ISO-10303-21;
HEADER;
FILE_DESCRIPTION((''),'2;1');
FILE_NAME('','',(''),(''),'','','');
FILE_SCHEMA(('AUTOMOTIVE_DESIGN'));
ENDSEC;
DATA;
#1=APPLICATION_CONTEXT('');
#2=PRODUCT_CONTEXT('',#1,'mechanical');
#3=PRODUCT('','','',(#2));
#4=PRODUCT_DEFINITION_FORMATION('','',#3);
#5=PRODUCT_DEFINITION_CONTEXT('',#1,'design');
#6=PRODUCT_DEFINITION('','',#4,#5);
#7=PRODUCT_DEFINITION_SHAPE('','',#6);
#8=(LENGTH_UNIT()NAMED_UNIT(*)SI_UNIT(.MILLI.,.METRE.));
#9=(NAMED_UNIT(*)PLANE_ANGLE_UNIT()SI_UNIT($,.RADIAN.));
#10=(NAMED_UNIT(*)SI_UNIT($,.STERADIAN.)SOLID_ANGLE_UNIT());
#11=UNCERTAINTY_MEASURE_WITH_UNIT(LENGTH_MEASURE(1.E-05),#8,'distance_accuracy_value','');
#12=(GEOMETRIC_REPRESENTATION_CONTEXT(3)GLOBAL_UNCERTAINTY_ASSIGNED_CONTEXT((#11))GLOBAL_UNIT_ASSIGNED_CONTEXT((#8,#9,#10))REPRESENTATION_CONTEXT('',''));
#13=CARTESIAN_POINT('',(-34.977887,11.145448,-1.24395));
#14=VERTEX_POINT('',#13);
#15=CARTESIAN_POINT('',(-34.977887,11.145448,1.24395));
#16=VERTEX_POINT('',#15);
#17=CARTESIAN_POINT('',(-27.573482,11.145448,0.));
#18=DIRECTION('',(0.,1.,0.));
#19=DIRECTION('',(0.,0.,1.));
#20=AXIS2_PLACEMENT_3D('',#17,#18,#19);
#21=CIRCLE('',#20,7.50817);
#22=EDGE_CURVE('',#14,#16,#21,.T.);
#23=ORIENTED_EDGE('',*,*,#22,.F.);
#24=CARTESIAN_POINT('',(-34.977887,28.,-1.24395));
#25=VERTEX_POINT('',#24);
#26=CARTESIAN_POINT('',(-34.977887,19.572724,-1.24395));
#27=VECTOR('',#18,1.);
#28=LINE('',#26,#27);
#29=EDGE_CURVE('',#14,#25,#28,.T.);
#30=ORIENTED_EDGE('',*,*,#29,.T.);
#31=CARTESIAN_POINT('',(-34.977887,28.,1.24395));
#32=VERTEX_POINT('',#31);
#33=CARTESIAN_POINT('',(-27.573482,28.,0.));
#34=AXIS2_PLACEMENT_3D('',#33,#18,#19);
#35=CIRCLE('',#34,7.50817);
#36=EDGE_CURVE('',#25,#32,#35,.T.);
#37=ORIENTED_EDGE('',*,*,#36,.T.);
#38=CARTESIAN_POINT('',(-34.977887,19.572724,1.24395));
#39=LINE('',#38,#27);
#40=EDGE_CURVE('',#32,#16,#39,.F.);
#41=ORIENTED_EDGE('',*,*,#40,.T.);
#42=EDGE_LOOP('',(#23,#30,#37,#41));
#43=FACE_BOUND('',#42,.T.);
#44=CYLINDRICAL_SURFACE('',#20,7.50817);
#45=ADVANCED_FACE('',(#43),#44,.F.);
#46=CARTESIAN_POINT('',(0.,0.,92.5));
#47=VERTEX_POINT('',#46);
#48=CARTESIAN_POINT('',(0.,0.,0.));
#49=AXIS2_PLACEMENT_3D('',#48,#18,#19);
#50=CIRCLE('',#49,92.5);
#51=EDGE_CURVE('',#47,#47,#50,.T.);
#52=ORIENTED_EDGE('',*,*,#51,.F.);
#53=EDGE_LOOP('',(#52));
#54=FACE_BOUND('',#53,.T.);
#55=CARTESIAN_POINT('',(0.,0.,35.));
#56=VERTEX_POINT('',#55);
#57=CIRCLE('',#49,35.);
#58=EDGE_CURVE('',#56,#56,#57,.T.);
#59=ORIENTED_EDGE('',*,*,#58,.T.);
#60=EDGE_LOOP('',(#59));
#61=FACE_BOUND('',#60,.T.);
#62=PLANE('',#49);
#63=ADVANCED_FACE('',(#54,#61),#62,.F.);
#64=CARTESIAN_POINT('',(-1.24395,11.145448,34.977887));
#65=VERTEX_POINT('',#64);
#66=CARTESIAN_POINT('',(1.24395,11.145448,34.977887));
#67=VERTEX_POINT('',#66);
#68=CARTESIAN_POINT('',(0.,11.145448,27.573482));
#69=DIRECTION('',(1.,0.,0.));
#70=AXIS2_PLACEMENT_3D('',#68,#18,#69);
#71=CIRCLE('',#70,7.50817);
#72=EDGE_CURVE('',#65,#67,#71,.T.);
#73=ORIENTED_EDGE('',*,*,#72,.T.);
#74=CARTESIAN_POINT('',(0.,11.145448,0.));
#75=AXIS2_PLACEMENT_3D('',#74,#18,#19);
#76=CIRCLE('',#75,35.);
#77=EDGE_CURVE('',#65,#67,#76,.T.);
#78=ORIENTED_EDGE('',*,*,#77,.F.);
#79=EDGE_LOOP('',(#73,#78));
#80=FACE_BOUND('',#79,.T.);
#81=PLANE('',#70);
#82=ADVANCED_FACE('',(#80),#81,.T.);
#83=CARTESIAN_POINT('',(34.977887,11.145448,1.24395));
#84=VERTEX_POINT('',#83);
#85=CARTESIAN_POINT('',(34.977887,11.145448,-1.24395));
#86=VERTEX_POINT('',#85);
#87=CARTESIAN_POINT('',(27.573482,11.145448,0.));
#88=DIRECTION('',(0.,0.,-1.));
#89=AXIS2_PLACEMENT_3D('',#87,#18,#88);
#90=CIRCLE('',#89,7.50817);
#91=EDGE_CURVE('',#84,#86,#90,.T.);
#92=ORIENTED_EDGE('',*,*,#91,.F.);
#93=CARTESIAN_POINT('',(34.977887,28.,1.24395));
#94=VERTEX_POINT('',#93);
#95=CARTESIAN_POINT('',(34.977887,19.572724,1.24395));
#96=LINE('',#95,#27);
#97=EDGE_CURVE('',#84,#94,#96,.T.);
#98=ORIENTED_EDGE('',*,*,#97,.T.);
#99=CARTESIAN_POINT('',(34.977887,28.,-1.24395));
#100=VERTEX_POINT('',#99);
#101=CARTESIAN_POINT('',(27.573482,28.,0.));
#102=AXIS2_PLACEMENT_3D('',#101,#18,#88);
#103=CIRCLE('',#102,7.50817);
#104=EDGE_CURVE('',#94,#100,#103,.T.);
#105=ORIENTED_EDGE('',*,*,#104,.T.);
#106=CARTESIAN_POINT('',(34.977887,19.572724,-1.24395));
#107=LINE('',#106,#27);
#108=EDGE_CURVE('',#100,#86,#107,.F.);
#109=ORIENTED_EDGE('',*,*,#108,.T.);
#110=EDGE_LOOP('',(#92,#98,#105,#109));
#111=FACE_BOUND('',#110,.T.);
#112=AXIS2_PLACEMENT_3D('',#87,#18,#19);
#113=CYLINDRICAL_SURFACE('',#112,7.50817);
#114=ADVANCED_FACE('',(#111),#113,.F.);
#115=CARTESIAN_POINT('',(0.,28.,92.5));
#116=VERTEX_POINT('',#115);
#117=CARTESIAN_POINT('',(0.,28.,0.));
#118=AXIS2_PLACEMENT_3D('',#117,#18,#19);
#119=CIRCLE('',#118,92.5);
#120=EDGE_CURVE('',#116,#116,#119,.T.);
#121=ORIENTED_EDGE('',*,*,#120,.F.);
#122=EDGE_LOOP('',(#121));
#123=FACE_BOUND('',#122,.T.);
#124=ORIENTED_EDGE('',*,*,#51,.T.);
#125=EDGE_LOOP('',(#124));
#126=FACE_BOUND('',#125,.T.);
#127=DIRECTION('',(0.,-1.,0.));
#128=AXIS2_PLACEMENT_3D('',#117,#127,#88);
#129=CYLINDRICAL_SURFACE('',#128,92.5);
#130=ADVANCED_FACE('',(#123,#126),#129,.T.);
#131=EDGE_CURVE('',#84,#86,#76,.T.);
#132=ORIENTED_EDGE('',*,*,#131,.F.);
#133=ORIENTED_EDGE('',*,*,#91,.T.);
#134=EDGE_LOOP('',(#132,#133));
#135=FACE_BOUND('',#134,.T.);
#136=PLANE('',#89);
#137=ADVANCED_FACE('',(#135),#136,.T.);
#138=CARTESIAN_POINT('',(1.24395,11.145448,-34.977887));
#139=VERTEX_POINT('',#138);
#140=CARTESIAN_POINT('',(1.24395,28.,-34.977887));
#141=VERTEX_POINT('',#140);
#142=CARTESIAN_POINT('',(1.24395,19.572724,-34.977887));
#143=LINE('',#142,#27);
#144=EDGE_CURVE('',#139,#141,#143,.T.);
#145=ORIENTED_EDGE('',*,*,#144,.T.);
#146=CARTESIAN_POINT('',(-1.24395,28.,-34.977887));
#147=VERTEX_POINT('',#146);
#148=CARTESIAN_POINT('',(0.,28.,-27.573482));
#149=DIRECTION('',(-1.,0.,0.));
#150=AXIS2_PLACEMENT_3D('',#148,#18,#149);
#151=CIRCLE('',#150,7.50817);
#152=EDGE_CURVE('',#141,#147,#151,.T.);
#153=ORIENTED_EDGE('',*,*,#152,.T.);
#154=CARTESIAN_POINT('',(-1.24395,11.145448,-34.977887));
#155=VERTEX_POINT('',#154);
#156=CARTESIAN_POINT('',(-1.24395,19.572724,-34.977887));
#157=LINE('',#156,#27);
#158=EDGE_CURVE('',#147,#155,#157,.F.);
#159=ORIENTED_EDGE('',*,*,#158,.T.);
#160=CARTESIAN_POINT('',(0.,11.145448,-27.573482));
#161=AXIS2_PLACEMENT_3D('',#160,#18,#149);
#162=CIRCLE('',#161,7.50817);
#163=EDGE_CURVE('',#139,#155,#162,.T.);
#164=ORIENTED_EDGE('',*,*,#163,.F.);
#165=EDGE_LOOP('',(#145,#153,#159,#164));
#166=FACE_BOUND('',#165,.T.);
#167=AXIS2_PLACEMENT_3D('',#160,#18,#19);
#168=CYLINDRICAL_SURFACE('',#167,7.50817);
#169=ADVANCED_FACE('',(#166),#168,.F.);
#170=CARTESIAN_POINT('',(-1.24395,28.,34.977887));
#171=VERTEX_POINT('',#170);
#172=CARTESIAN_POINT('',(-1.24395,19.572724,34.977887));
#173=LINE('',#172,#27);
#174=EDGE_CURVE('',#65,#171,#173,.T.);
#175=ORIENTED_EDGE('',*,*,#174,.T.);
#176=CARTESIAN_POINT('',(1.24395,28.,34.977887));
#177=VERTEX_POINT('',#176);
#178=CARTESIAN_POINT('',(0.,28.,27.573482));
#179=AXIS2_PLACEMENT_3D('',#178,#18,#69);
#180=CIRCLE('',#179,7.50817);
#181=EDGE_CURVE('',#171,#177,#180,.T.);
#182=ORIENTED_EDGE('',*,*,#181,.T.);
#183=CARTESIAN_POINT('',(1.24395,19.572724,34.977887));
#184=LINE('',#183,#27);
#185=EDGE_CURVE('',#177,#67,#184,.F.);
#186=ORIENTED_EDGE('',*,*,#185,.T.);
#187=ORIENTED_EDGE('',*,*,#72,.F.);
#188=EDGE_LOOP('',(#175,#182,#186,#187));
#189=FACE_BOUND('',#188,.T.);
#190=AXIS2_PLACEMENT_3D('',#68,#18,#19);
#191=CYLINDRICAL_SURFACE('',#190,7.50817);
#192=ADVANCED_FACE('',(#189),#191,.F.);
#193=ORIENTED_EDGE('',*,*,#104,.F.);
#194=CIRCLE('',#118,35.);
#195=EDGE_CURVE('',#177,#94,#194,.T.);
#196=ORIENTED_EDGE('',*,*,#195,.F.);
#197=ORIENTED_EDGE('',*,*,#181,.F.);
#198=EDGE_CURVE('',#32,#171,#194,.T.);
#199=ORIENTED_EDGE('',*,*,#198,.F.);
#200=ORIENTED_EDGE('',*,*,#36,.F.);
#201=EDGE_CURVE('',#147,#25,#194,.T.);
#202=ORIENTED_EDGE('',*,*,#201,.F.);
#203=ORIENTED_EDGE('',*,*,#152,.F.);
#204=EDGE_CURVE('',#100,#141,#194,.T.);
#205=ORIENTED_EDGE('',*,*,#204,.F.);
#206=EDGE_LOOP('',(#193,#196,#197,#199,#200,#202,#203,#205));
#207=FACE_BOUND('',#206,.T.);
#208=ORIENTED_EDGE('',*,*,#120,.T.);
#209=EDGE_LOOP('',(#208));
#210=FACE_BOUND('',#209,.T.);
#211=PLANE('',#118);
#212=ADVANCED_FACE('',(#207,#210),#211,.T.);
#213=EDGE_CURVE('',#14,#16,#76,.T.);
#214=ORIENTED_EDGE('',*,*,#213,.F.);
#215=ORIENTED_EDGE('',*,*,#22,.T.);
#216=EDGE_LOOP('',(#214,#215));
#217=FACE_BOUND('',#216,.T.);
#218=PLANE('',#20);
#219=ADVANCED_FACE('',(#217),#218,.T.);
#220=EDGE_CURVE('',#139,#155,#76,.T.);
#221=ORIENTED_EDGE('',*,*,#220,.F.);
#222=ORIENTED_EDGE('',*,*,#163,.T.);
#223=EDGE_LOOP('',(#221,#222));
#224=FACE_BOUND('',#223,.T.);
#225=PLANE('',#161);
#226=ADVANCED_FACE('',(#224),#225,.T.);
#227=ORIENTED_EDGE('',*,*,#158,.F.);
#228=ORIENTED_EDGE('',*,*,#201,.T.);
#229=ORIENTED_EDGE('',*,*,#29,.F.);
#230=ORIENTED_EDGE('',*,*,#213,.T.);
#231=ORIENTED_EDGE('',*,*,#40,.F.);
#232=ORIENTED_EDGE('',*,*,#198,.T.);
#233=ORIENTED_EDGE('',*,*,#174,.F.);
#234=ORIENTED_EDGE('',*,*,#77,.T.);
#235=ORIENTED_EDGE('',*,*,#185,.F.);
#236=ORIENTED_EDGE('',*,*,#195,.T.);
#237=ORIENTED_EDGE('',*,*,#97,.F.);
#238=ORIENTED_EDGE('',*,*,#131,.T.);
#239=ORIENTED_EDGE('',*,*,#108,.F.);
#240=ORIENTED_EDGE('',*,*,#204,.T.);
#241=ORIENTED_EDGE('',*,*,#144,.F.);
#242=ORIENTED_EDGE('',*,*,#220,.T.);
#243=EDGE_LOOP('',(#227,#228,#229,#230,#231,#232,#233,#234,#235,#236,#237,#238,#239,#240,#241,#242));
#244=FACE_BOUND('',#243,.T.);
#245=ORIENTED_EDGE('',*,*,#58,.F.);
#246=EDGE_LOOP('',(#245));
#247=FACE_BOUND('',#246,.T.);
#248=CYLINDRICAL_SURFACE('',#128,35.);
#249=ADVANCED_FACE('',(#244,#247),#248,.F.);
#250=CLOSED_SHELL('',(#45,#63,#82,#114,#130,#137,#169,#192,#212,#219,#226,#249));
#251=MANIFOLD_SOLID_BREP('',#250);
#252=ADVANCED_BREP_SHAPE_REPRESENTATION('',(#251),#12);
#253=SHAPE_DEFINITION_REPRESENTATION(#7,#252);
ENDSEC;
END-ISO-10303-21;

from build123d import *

# Parameters (mm, degrees)
SKETCH1_R           = 92.5
BOSS_EXTRUDE1_DEPTH = 28
SKETCH2_R           = 35
CUT_EXTRUDE1_DEPTH  = 134.777800849
SKETCH3_R           = 7.508170216
CUT_EXTRUDE2_DEPTH  = 16.854551782
CIRPATTERN1_COUNT   = 4


with BuildPart() as part:
    # Sketch1 → Boss-Extrude1 (new body)
    with BuildSketch(Plane(origin=(0, 0, 0), x_dir=(1, 0, 0), z_dir=(0, 1, 0))):
        Circle(SKETCH1_R)
    extrude(amount=BOSS_EXTRUDE1_DEPTH)

    # Sketch2 → Cut-Extrude1 (cut, through all)
    with BuildSketch(Plane(origin=(0, 0, 0), x_dir=(1, 0, 0), z_dir=(0, 1, 0))):
        Circle(SKETCH2_R)
    extrude(amount=CUT_EXTRUDE1_DEPTH, mode=Mode.SUBTRACT)

    # Sketch3 → Cut-Extrude2 (cut)
    with BuildSketch(Plane(origin=(0, 28, 0), x_dir=(1, 0, 0), z_dir=(0, 1, 0))):
        with Locations((-27.57348246, 0)):
            Circle(SKETCH3_R)
    cut_extrude2 = extrude(amount=-CUT_EXTRUDE2_DEPTH, mode=Mode.SUBTRACT)

    # CirPattern1: Cut-Extrude2 ×4 about axis
    cirpattern1_axis = Axis((0, 0, 0), (0, 1, 0))
    for i in range(1, CIRPATTERN1_COUNT):
        add(cut_extrude2.rotate(cirpattern1_axis, i * 360 / CIRPATTERN1_COUNT), mode=Mode.SUBTRACT)


solid = part.part
